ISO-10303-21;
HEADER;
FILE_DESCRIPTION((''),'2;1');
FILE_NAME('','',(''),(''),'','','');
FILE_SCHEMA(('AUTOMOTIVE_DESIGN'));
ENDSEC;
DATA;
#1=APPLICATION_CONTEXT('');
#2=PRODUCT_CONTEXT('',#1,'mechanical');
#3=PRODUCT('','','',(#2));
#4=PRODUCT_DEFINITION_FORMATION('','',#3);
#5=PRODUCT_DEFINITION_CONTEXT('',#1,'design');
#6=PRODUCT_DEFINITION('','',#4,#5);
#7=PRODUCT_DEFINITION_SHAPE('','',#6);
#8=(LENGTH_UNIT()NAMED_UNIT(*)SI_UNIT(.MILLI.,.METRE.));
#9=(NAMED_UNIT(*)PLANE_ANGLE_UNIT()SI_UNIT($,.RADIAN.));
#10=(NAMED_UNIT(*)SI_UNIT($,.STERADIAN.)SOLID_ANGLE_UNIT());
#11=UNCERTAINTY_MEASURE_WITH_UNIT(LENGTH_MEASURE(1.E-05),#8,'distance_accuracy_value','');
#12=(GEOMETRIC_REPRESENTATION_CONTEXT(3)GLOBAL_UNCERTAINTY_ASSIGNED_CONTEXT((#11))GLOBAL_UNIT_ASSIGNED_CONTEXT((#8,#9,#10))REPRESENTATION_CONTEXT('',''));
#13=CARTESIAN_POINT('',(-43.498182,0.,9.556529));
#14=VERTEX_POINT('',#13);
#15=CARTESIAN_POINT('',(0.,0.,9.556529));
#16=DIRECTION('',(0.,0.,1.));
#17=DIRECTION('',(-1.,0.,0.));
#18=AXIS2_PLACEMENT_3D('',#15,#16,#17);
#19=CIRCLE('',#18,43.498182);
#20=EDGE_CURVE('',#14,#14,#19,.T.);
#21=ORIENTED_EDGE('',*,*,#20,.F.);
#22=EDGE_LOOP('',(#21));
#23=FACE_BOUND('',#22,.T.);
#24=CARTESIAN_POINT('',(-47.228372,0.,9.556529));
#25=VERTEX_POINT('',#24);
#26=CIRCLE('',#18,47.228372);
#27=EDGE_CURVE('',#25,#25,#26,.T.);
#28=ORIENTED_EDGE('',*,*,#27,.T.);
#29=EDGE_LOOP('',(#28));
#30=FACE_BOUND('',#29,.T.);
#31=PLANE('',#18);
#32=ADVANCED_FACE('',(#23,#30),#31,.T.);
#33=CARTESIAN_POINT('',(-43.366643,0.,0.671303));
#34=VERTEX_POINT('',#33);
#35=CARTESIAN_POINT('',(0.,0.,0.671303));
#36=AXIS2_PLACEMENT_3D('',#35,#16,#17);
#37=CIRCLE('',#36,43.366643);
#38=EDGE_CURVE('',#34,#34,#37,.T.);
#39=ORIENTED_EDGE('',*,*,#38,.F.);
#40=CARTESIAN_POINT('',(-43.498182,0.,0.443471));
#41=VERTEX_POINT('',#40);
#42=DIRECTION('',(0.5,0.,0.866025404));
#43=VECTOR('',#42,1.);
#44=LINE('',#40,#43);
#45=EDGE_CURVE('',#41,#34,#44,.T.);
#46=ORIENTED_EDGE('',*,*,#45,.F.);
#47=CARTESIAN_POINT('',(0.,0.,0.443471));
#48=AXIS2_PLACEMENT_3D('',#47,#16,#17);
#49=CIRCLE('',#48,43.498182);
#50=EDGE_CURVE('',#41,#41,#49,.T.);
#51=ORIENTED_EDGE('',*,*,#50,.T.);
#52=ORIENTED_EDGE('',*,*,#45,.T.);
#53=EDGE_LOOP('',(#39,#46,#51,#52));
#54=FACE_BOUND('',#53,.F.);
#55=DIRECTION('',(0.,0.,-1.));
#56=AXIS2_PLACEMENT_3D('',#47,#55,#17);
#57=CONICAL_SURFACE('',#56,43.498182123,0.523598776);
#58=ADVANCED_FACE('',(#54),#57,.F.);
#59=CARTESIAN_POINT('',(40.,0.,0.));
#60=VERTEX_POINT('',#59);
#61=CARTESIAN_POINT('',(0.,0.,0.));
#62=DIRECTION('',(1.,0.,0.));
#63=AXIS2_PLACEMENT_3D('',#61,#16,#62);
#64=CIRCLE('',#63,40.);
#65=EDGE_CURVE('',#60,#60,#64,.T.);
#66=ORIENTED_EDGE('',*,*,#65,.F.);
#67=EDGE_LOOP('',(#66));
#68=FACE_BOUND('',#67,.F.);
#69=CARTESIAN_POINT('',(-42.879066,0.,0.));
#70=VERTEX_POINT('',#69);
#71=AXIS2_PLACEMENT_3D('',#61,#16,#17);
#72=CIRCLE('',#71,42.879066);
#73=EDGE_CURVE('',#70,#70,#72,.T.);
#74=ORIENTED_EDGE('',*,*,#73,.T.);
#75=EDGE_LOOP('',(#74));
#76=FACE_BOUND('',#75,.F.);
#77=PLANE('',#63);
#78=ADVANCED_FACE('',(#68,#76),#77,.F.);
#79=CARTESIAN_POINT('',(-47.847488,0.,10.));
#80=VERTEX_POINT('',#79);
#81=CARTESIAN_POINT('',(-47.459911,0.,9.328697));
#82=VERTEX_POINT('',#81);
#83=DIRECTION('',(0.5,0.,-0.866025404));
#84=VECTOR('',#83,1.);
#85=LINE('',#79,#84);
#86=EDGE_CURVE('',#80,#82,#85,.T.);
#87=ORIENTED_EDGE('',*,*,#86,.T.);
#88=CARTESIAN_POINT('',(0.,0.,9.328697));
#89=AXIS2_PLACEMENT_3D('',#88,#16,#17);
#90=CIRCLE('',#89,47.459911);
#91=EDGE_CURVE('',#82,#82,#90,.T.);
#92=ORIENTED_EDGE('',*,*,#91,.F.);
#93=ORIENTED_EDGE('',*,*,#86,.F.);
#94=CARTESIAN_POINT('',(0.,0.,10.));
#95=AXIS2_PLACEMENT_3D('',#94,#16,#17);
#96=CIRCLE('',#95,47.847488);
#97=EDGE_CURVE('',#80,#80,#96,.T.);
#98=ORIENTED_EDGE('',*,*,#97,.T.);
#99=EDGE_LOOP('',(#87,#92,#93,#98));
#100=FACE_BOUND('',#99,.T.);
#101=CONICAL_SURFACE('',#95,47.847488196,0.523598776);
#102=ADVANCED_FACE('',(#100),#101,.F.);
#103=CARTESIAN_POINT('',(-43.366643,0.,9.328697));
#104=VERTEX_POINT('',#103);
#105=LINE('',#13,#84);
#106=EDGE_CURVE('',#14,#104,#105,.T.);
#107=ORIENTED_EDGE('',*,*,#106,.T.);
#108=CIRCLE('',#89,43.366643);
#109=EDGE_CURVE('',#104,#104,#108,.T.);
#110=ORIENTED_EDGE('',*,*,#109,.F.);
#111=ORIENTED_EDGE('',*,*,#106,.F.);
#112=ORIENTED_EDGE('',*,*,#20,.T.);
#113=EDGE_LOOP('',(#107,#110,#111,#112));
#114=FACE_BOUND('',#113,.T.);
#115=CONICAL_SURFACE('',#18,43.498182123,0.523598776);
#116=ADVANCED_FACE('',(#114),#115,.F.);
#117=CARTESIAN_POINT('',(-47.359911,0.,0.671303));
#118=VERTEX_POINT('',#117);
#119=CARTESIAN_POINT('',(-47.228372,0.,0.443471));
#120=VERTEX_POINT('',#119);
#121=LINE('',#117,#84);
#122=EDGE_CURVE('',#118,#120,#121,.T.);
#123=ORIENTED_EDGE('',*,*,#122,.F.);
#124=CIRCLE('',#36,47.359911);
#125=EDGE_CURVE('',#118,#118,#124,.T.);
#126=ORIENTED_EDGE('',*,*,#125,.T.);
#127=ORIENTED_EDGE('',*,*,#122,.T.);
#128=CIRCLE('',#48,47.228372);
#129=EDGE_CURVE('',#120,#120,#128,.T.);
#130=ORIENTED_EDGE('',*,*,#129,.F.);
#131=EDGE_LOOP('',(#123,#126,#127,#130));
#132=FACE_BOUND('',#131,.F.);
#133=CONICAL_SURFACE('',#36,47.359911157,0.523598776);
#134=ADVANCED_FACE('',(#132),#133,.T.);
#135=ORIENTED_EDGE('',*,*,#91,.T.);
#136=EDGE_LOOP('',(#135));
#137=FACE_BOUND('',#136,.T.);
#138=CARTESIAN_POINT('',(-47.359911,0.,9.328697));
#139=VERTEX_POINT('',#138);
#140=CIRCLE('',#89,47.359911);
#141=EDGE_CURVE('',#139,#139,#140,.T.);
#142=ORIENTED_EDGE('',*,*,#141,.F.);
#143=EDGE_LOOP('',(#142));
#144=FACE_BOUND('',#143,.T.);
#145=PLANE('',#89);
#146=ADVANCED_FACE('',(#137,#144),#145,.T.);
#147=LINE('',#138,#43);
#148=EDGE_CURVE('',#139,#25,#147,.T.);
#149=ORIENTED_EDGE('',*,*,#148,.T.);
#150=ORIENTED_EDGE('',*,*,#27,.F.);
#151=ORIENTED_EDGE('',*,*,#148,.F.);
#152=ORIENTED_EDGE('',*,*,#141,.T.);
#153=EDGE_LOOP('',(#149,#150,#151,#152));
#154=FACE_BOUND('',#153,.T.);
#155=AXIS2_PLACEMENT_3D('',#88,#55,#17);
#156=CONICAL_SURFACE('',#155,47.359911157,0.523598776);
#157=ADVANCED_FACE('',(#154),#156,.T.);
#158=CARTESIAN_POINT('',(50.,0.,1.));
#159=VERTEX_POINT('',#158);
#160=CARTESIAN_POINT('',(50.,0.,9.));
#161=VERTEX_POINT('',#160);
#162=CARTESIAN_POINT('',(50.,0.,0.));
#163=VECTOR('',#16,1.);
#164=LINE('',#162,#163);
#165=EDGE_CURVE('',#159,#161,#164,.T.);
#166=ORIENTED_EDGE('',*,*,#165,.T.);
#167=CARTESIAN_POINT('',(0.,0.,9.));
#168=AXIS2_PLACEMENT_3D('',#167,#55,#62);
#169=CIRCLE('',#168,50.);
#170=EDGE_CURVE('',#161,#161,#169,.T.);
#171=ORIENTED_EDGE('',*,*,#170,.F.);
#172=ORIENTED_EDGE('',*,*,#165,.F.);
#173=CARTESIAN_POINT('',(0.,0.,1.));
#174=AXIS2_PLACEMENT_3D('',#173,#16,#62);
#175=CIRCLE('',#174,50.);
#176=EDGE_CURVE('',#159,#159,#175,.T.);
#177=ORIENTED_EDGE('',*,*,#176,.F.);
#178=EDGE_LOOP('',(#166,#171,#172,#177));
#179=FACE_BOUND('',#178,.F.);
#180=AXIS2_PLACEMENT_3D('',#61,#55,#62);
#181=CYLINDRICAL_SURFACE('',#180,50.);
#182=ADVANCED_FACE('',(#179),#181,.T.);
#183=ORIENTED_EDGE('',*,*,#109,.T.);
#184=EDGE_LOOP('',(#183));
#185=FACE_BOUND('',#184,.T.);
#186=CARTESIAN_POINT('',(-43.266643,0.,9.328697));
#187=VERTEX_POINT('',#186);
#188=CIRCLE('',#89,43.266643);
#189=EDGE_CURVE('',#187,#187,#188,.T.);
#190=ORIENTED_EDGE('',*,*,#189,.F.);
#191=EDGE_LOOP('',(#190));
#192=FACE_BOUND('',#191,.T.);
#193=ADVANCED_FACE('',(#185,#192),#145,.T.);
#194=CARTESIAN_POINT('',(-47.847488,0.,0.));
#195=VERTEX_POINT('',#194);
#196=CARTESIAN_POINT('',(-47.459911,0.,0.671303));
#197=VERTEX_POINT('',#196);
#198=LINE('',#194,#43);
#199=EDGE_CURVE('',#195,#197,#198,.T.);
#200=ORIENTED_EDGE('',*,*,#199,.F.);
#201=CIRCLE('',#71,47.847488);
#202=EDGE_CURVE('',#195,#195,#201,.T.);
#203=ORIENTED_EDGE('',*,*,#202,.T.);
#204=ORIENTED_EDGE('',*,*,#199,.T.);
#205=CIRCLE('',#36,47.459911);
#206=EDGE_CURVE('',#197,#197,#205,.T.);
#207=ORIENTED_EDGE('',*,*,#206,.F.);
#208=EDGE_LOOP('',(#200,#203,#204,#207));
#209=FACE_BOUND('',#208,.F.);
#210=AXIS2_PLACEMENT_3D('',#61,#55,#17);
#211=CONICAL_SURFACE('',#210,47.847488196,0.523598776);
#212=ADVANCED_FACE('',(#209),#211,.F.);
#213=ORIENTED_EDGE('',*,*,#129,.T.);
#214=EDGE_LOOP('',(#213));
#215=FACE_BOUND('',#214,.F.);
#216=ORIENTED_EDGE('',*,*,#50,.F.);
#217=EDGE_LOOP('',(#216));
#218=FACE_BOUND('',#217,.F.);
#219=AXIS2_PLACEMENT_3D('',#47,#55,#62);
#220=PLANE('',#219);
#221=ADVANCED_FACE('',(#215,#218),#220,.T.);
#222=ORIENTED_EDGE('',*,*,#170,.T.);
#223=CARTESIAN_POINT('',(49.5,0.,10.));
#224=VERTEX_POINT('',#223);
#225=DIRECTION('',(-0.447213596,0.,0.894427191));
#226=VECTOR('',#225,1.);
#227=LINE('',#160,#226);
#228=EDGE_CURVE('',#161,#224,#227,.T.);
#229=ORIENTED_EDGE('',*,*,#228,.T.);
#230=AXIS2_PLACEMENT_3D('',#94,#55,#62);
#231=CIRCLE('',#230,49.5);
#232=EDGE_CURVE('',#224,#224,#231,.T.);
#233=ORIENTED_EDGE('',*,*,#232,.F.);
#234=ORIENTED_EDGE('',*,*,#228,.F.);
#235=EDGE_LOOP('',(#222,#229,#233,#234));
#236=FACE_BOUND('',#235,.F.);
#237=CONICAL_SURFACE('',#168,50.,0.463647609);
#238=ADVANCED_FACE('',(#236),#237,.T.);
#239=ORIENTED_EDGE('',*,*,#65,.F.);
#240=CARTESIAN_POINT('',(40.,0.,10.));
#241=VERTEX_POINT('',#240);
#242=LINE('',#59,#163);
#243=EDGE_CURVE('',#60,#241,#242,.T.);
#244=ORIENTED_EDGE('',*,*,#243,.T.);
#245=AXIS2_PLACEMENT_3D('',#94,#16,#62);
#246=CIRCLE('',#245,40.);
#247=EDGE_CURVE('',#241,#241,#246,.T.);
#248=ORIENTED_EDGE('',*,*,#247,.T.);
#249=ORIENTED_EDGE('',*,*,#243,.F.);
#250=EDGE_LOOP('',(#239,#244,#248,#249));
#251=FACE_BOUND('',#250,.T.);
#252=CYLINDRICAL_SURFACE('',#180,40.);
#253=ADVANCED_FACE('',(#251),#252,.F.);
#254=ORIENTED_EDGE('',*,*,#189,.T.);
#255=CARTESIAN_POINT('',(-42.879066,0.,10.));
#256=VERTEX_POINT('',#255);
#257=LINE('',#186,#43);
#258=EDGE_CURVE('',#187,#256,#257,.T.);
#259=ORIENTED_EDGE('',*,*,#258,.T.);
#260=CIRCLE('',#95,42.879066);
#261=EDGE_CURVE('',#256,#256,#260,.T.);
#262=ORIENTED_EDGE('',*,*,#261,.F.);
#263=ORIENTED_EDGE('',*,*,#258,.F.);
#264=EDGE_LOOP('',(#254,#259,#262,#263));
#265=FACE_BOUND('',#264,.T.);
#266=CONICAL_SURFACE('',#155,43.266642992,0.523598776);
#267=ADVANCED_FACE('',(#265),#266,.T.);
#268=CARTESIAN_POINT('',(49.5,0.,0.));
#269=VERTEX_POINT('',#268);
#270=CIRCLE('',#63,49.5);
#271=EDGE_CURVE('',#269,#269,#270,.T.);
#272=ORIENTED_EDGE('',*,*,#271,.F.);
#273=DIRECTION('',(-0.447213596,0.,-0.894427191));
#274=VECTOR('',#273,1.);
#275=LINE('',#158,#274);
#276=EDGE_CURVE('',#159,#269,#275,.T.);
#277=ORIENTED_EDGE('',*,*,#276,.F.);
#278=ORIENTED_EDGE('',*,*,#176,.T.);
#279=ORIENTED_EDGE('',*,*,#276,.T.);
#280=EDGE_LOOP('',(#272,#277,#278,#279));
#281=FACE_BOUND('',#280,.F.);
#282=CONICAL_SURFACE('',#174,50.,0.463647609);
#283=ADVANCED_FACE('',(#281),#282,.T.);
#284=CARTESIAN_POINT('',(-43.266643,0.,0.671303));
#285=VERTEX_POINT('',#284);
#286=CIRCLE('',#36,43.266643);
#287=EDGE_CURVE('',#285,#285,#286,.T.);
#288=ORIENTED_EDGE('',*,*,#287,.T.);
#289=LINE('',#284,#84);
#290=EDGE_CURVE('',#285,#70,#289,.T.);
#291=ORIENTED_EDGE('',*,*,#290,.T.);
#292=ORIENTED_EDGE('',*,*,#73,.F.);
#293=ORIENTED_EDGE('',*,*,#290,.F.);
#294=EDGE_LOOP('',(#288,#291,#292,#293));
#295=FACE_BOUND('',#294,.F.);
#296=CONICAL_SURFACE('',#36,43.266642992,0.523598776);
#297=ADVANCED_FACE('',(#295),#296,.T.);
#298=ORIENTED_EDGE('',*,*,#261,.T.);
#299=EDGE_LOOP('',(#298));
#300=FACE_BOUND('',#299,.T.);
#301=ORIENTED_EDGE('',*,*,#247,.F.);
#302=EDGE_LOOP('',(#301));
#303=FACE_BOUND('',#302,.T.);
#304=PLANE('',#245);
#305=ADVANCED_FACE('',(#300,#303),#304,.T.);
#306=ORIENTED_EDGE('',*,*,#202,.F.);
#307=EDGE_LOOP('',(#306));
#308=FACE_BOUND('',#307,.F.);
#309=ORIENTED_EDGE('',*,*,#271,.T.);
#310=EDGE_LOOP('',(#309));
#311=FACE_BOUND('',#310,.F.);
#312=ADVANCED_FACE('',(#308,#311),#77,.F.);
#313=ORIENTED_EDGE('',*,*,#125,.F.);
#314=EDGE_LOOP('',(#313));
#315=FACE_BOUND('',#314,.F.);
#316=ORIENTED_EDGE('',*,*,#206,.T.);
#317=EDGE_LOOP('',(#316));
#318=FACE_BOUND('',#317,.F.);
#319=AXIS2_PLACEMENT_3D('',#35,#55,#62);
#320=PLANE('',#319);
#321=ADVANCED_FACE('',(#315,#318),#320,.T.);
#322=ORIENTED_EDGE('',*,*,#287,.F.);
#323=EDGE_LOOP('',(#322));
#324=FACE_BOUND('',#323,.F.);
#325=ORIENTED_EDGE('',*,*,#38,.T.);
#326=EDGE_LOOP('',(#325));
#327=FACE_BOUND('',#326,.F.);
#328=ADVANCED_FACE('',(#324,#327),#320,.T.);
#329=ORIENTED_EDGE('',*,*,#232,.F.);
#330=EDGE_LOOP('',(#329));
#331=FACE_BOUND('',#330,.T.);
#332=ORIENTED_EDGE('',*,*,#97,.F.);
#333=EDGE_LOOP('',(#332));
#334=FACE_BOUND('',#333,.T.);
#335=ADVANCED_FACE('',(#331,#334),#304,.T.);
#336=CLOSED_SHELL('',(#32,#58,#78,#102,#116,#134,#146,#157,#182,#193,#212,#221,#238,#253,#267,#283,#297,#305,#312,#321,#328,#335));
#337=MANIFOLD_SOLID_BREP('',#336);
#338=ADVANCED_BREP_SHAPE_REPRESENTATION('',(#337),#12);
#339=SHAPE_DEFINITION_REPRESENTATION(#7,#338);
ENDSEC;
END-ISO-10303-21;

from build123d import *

# Parameters (mm, degrees)
F0_R     = 50
F0_R_2   = 40
F1_DEPTH = 10
F5_SIZE2 = 0.5
F5_SIZE  = 1


# Not quite as in the source:
# - a pattern or mirror of a feature is missing from the dataset's text; its kind, count and spacing are read off the source's solid


with BuildPart() as f1:
    # F0 (on Top) → F1 (new body)
    with BuildSketch(Plane.XY):
        Circle(F0_R)
        Circle(F0_R_2, mode=Mode.SUBTRACT)
    extrude(amount=F1_DEPTH)

    # F2 (on Front) → F3 (revolve, cut)
    with BuildSketch(Plane.XZ):
        Polygon((-50, 13.4113135189), (-50, 10), (-47.8474881957, 10), (-47.4599111567, 9.3286968768), (-47.3599111567, 9.3286968768), (-47.2283720253, 9.5565293356), (-43.498182123, 9.5565293356), (-43.3666429916, 9.3286968768), (-43.2666429916, 9.3286968768), (-42.8790659527, 10), (-40, 10), (-40, 13.4113135189), align=None)
    f3 = revolve(axis=Axis((0, 0, 10.9280112665), (0, 0, 1)), mode=Mode.SUBTRACT)

    # F3_copies: F3 across plane
    add(f3.mirror(Plane(origin=(0, 0, 5), x_dir=(-1, 0, 0), z_dir=(0, 0, -1))), mode=Mode.SUBTRACT)

    # F5
    f5_edges = [f1.edges().sort_by_distance(p)[0] for p in [
        (-50, 0, 10),
        (-50, 0, 0),
    ]]
    f5_side = f1.faces().sort_by_distance((-50, 0, 5))[0]
    chamfer(f5_edges, length=F5_SIZE, length2=F5_SIZE2, reference=f5_side)


solid = f1.part
